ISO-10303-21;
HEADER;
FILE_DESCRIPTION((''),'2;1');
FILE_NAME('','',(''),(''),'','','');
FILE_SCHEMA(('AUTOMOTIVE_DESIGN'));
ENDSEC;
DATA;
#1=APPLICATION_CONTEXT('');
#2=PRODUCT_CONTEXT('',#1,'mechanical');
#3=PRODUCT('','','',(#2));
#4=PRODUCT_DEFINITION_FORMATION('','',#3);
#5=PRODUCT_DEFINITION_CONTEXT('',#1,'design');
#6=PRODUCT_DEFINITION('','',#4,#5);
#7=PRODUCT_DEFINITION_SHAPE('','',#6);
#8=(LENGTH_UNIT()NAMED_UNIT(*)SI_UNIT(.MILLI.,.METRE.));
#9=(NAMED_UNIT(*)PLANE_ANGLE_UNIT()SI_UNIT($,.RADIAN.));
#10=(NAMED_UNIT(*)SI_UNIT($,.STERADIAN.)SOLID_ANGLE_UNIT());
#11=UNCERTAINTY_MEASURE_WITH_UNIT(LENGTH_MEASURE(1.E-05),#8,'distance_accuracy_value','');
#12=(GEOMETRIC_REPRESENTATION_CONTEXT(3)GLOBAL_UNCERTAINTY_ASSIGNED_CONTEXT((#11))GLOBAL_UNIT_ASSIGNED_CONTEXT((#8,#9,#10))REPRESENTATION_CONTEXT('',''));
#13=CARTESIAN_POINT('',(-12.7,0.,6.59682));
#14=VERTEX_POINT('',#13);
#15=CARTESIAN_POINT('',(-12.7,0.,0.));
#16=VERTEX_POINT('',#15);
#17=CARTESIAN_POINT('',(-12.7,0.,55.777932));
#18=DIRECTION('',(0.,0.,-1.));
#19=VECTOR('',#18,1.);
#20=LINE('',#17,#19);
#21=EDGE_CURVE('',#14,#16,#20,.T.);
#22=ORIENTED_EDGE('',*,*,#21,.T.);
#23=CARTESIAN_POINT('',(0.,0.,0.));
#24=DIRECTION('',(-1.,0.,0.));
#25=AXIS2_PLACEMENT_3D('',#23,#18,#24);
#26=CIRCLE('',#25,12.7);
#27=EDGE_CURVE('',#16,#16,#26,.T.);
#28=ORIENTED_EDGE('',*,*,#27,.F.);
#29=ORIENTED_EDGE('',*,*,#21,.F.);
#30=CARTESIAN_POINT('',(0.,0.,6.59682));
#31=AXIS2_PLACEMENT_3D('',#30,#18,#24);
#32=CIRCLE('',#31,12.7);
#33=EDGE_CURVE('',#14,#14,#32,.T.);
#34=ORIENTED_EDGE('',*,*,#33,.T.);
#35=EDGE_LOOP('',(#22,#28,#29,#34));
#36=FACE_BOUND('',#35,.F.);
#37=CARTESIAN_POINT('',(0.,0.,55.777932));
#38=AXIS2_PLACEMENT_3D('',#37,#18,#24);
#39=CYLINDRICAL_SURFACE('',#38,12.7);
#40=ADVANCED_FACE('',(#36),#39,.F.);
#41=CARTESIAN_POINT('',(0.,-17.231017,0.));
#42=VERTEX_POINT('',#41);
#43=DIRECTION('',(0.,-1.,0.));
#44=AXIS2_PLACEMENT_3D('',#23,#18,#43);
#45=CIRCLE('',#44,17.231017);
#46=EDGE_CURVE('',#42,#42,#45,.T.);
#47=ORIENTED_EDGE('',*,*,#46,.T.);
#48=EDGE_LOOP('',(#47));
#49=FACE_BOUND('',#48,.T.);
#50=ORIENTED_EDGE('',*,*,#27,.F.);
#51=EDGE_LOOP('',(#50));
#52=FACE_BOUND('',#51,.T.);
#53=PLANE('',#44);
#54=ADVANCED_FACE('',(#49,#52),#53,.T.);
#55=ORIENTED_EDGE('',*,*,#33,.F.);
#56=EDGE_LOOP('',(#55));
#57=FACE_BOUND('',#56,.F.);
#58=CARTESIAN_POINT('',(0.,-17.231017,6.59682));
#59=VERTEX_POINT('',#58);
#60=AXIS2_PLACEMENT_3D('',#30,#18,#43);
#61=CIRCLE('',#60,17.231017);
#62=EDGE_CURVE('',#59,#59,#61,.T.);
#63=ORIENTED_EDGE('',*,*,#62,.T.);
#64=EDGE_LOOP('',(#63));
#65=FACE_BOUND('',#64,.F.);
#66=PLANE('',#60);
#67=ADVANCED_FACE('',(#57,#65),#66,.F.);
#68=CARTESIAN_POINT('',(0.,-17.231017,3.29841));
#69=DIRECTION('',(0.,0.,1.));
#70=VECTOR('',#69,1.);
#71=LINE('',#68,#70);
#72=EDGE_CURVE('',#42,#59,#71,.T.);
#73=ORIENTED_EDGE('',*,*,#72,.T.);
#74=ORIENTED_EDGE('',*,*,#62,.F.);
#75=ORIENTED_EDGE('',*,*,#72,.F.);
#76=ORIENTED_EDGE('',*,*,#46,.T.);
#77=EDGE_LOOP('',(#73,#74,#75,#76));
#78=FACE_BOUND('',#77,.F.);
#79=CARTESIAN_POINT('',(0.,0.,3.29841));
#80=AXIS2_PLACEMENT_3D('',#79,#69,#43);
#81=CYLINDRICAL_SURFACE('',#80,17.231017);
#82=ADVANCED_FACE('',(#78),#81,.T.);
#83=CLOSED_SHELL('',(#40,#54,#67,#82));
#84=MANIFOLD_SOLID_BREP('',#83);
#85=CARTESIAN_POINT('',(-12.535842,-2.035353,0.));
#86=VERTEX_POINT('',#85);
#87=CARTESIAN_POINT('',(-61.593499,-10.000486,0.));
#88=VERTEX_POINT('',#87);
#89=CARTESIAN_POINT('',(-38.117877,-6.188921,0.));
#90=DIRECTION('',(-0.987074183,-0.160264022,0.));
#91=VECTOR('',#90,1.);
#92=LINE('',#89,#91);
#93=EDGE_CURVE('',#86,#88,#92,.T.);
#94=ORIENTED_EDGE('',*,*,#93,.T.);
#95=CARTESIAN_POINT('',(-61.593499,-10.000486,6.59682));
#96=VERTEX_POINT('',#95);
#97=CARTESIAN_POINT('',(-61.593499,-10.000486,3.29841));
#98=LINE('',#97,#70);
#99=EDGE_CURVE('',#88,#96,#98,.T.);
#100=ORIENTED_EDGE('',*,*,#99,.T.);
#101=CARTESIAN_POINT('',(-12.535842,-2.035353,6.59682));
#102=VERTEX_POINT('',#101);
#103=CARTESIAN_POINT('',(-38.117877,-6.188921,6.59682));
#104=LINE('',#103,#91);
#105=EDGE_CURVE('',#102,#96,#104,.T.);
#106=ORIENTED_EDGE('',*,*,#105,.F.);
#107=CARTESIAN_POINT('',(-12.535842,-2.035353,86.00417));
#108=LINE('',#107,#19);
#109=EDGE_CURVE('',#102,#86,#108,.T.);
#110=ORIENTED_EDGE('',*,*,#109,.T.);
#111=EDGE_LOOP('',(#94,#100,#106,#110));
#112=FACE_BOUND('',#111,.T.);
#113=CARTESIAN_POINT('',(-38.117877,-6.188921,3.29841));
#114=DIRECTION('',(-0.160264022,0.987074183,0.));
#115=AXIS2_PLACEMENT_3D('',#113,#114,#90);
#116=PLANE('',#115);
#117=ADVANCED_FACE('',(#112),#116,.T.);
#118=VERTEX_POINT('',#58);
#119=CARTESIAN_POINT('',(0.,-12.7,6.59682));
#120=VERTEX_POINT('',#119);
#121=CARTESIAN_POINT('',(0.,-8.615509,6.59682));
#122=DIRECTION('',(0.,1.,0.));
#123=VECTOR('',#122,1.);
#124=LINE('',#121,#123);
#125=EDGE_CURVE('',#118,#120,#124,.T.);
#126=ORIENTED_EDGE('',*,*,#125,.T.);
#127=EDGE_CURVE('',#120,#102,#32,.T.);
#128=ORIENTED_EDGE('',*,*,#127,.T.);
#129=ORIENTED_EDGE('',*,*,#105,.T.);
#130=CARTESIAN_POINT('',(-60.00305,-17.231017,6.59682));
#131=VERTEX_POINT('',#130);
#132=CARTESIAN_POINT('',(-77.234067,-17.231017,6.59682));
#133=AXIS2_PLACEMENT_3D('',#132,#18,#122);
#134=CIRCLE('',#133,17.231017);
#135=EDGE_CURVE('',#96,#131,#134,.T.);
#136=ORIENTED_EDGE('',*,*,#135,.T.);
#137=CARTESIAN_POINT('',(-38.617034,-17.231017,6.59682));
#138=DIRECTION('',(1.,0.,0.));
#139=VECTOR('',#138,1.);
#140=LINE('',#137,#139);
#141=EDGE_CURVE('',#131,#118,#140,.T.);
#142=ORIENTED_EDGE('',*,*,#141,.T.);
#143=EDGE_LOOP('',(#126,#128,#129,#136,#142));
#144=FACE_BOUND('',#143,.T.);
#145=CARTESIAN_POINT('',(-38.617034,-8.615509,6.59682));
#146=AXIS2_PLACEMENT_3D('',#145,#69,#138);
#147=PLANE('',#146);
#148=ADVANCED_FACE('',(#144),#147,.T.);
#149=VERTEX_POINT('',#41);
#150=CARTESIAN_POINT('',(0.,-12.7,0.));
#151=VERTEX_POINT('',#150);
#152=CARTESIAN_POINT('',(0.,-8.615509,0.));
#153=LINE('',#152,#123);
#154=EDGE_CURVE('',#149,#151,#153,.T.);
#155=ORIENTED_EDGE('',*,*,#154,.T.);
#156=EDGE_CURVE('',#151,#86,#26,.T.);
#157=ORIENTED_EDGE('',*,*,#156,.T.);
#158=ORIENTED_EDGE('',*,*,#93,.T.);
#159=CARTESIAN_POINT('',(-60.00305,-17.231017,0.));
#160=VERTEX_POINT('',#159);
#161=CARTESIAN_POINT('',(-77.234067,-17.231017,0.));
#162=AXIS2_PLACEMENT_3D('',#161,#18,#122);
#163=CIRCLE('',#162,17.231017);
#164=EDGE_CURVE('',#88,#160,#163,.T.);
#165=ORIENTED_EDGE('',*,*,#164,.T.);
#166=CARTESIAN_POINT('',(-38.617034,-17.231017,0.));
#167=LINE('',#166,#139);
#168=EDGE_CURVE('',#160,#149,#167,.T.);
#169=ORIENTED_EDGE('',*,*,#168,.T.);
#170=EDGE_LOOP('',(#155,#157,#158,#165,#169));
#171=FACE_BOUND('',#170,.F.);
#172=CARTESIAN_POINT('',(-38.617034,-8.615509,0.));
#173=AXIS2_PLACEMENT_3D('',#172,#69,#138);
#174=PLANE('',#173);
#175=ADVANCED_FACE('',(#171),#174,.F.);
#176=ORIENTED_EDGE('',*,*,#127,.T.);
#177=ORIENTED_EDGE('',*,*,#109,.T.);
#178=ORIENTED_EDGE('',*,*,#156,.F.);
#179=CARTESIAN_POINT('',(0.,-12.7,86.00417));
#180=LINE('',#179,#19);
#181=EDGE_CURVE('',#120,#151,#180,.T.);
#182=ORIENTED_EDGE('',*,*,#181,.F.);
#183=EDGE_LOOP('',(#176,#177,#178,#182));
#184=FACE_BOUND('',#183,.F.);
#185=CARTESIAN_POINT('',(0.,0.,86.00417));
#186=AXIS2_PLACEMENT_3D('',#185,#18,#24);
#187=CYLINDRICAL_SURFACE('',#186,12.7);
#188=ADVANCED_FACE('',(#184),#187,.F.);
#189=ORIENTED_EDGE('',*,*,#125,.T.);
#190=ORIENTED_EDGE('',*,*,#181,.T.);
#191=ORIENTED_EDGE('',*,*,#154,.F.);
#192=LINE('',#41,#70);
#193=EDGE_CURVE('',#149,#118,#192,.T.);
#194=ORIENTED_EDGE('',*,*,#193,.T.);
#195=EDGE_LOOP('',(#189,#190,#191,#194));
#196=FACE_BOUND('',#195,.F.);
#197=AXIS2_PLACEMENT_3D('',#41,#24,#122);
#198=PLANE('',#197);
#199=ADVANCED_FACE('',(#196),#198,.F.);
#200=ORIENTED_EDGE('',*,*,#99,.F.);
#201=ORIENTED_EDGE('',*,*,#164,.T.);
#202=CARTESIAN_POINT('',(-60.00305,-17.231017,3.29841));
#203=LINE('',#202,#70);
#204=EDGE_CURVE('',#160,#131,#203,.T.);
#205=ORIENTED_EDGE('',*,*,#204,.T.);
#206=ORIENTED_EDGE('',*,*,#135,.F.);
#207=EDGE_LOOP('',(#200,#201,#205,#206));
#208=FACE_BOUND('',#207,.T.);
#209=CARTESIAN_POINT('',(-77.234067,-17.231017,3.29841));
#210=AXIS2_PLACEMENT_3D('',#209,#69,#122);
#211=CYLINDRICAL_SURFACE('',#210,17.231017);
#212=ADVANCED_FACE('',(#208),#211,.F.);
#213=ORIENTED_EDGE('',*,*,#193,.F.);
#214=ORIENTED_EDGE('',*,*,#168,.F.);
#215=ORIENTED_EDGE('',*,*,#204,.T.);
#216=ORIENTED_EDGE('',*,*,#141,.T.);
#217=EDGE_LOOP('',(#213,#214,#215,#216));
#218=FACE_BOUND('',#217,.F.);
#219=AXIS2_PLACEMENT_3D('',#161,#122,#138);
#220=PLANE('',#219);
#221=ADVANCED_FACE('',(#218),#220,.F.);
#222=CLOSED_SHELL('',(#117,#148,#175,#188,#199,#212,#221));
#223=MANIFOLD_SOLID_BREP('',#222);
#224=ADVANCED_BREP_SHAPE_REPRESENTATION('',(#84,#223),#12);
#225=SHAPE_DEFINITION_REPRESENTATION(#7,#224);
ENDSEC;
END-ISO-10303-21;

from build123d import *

# Parameters (mm, degrees)
F0_W          = 77.2340670228
F0_H          = 17.2310173512
F1_DEPTH      = 6.596820429
F1_FACE_W     = 77.2340670228
F1_FACE_H     = 6.596820429
F2_ANGLE_BACK = 9.2222213089
F2_ANGLE      = 18.4444426177
F1_FACE1_W    = 17.2310173512
F1_FACE1_H    = 6.596820429
F5_D          = 25.4
F5_2_D        = 25.4
F1_FACE2_W    = 17.2310173512
F1_FACE2_H    = 6.596820429


# Not quite as in the source:
# - the program builds the solid bodies; features that only make, move or delete a surface that nothing else refers to are left out


with BuildPart() as f1:
    # F0 (on Top) → F1 (new body)
    with BuildSketch(Plane.XY):
        with Locations((-38.6170335114, -8.6155086756)):
            Rectangle(F0_W, F0_H)
    extrude(amount=F1_DEPTH)

    # F1_face (on face) → F2 (revolve, cut)
    with BuildSketch(Plane(origin=(-38.6170335114, 0, 3.2984102145), x_dir=(-1, 0, 0), z_dir=(0, 1, 0)), mode=Mode.PRIVATE) as f2_sk:
        Rectangle(F1_FACE_W, F1_FACE_H)
    revolve(f2_sk.sketch.rotate(Axis((0, 0, 3.2984102145), (0, 0, -1)), -F2_ANGLE_BACK), axis=Axis((0, 0, 3.2984102145), (0, 0, -1)), revolution_arc=F2_ANGLE, mode=Mode.SUBTRACT)

    # F5 (through all)
    with Locations(Plane.XY.offset(6.596820429)):
        with Locations((0, 0)):
            Hole(F5_D / 2)

    # F1_face2 (on face) → F6 (revolve, cut)
    with BuildSketch(Plane(origin=(-77.2340670228, -8.6155086756, 3.2984102145), x_dir=(0, -1, 0), z_dir=(-1, 0, 0))):
        Rectangle(F1_FACE2_W, F1_FACE2_H)
    revolve(axis=Axis((-77.2340670228, -17.2310173512, 3.2984102145), (0, 0, -1)), mode=Mode.SUBTRACT)


with BuildPart() as f3:
    # F1_face1 (on face) → F3 (revolve)
    with BuildSketch(Plane(origin=(0, -8.6155086756, 3.2984102145), x_dir=(0, 1, 0), z_dir=(1, 0, 0))):
        Rectangle(F1_FACE1_W, F1_FACE1_H)
    revolve(axis=Axis((0, 0, 3.2984102145), (0, 0, -1)))

    # F5#2 (through all)
    with Locations(Plane.XY.offset(6.596820429)):
        with Locations((0, 0)):
            Hole(F5_2_D / 2)


solid = Compound([f1.part, f3.part])
